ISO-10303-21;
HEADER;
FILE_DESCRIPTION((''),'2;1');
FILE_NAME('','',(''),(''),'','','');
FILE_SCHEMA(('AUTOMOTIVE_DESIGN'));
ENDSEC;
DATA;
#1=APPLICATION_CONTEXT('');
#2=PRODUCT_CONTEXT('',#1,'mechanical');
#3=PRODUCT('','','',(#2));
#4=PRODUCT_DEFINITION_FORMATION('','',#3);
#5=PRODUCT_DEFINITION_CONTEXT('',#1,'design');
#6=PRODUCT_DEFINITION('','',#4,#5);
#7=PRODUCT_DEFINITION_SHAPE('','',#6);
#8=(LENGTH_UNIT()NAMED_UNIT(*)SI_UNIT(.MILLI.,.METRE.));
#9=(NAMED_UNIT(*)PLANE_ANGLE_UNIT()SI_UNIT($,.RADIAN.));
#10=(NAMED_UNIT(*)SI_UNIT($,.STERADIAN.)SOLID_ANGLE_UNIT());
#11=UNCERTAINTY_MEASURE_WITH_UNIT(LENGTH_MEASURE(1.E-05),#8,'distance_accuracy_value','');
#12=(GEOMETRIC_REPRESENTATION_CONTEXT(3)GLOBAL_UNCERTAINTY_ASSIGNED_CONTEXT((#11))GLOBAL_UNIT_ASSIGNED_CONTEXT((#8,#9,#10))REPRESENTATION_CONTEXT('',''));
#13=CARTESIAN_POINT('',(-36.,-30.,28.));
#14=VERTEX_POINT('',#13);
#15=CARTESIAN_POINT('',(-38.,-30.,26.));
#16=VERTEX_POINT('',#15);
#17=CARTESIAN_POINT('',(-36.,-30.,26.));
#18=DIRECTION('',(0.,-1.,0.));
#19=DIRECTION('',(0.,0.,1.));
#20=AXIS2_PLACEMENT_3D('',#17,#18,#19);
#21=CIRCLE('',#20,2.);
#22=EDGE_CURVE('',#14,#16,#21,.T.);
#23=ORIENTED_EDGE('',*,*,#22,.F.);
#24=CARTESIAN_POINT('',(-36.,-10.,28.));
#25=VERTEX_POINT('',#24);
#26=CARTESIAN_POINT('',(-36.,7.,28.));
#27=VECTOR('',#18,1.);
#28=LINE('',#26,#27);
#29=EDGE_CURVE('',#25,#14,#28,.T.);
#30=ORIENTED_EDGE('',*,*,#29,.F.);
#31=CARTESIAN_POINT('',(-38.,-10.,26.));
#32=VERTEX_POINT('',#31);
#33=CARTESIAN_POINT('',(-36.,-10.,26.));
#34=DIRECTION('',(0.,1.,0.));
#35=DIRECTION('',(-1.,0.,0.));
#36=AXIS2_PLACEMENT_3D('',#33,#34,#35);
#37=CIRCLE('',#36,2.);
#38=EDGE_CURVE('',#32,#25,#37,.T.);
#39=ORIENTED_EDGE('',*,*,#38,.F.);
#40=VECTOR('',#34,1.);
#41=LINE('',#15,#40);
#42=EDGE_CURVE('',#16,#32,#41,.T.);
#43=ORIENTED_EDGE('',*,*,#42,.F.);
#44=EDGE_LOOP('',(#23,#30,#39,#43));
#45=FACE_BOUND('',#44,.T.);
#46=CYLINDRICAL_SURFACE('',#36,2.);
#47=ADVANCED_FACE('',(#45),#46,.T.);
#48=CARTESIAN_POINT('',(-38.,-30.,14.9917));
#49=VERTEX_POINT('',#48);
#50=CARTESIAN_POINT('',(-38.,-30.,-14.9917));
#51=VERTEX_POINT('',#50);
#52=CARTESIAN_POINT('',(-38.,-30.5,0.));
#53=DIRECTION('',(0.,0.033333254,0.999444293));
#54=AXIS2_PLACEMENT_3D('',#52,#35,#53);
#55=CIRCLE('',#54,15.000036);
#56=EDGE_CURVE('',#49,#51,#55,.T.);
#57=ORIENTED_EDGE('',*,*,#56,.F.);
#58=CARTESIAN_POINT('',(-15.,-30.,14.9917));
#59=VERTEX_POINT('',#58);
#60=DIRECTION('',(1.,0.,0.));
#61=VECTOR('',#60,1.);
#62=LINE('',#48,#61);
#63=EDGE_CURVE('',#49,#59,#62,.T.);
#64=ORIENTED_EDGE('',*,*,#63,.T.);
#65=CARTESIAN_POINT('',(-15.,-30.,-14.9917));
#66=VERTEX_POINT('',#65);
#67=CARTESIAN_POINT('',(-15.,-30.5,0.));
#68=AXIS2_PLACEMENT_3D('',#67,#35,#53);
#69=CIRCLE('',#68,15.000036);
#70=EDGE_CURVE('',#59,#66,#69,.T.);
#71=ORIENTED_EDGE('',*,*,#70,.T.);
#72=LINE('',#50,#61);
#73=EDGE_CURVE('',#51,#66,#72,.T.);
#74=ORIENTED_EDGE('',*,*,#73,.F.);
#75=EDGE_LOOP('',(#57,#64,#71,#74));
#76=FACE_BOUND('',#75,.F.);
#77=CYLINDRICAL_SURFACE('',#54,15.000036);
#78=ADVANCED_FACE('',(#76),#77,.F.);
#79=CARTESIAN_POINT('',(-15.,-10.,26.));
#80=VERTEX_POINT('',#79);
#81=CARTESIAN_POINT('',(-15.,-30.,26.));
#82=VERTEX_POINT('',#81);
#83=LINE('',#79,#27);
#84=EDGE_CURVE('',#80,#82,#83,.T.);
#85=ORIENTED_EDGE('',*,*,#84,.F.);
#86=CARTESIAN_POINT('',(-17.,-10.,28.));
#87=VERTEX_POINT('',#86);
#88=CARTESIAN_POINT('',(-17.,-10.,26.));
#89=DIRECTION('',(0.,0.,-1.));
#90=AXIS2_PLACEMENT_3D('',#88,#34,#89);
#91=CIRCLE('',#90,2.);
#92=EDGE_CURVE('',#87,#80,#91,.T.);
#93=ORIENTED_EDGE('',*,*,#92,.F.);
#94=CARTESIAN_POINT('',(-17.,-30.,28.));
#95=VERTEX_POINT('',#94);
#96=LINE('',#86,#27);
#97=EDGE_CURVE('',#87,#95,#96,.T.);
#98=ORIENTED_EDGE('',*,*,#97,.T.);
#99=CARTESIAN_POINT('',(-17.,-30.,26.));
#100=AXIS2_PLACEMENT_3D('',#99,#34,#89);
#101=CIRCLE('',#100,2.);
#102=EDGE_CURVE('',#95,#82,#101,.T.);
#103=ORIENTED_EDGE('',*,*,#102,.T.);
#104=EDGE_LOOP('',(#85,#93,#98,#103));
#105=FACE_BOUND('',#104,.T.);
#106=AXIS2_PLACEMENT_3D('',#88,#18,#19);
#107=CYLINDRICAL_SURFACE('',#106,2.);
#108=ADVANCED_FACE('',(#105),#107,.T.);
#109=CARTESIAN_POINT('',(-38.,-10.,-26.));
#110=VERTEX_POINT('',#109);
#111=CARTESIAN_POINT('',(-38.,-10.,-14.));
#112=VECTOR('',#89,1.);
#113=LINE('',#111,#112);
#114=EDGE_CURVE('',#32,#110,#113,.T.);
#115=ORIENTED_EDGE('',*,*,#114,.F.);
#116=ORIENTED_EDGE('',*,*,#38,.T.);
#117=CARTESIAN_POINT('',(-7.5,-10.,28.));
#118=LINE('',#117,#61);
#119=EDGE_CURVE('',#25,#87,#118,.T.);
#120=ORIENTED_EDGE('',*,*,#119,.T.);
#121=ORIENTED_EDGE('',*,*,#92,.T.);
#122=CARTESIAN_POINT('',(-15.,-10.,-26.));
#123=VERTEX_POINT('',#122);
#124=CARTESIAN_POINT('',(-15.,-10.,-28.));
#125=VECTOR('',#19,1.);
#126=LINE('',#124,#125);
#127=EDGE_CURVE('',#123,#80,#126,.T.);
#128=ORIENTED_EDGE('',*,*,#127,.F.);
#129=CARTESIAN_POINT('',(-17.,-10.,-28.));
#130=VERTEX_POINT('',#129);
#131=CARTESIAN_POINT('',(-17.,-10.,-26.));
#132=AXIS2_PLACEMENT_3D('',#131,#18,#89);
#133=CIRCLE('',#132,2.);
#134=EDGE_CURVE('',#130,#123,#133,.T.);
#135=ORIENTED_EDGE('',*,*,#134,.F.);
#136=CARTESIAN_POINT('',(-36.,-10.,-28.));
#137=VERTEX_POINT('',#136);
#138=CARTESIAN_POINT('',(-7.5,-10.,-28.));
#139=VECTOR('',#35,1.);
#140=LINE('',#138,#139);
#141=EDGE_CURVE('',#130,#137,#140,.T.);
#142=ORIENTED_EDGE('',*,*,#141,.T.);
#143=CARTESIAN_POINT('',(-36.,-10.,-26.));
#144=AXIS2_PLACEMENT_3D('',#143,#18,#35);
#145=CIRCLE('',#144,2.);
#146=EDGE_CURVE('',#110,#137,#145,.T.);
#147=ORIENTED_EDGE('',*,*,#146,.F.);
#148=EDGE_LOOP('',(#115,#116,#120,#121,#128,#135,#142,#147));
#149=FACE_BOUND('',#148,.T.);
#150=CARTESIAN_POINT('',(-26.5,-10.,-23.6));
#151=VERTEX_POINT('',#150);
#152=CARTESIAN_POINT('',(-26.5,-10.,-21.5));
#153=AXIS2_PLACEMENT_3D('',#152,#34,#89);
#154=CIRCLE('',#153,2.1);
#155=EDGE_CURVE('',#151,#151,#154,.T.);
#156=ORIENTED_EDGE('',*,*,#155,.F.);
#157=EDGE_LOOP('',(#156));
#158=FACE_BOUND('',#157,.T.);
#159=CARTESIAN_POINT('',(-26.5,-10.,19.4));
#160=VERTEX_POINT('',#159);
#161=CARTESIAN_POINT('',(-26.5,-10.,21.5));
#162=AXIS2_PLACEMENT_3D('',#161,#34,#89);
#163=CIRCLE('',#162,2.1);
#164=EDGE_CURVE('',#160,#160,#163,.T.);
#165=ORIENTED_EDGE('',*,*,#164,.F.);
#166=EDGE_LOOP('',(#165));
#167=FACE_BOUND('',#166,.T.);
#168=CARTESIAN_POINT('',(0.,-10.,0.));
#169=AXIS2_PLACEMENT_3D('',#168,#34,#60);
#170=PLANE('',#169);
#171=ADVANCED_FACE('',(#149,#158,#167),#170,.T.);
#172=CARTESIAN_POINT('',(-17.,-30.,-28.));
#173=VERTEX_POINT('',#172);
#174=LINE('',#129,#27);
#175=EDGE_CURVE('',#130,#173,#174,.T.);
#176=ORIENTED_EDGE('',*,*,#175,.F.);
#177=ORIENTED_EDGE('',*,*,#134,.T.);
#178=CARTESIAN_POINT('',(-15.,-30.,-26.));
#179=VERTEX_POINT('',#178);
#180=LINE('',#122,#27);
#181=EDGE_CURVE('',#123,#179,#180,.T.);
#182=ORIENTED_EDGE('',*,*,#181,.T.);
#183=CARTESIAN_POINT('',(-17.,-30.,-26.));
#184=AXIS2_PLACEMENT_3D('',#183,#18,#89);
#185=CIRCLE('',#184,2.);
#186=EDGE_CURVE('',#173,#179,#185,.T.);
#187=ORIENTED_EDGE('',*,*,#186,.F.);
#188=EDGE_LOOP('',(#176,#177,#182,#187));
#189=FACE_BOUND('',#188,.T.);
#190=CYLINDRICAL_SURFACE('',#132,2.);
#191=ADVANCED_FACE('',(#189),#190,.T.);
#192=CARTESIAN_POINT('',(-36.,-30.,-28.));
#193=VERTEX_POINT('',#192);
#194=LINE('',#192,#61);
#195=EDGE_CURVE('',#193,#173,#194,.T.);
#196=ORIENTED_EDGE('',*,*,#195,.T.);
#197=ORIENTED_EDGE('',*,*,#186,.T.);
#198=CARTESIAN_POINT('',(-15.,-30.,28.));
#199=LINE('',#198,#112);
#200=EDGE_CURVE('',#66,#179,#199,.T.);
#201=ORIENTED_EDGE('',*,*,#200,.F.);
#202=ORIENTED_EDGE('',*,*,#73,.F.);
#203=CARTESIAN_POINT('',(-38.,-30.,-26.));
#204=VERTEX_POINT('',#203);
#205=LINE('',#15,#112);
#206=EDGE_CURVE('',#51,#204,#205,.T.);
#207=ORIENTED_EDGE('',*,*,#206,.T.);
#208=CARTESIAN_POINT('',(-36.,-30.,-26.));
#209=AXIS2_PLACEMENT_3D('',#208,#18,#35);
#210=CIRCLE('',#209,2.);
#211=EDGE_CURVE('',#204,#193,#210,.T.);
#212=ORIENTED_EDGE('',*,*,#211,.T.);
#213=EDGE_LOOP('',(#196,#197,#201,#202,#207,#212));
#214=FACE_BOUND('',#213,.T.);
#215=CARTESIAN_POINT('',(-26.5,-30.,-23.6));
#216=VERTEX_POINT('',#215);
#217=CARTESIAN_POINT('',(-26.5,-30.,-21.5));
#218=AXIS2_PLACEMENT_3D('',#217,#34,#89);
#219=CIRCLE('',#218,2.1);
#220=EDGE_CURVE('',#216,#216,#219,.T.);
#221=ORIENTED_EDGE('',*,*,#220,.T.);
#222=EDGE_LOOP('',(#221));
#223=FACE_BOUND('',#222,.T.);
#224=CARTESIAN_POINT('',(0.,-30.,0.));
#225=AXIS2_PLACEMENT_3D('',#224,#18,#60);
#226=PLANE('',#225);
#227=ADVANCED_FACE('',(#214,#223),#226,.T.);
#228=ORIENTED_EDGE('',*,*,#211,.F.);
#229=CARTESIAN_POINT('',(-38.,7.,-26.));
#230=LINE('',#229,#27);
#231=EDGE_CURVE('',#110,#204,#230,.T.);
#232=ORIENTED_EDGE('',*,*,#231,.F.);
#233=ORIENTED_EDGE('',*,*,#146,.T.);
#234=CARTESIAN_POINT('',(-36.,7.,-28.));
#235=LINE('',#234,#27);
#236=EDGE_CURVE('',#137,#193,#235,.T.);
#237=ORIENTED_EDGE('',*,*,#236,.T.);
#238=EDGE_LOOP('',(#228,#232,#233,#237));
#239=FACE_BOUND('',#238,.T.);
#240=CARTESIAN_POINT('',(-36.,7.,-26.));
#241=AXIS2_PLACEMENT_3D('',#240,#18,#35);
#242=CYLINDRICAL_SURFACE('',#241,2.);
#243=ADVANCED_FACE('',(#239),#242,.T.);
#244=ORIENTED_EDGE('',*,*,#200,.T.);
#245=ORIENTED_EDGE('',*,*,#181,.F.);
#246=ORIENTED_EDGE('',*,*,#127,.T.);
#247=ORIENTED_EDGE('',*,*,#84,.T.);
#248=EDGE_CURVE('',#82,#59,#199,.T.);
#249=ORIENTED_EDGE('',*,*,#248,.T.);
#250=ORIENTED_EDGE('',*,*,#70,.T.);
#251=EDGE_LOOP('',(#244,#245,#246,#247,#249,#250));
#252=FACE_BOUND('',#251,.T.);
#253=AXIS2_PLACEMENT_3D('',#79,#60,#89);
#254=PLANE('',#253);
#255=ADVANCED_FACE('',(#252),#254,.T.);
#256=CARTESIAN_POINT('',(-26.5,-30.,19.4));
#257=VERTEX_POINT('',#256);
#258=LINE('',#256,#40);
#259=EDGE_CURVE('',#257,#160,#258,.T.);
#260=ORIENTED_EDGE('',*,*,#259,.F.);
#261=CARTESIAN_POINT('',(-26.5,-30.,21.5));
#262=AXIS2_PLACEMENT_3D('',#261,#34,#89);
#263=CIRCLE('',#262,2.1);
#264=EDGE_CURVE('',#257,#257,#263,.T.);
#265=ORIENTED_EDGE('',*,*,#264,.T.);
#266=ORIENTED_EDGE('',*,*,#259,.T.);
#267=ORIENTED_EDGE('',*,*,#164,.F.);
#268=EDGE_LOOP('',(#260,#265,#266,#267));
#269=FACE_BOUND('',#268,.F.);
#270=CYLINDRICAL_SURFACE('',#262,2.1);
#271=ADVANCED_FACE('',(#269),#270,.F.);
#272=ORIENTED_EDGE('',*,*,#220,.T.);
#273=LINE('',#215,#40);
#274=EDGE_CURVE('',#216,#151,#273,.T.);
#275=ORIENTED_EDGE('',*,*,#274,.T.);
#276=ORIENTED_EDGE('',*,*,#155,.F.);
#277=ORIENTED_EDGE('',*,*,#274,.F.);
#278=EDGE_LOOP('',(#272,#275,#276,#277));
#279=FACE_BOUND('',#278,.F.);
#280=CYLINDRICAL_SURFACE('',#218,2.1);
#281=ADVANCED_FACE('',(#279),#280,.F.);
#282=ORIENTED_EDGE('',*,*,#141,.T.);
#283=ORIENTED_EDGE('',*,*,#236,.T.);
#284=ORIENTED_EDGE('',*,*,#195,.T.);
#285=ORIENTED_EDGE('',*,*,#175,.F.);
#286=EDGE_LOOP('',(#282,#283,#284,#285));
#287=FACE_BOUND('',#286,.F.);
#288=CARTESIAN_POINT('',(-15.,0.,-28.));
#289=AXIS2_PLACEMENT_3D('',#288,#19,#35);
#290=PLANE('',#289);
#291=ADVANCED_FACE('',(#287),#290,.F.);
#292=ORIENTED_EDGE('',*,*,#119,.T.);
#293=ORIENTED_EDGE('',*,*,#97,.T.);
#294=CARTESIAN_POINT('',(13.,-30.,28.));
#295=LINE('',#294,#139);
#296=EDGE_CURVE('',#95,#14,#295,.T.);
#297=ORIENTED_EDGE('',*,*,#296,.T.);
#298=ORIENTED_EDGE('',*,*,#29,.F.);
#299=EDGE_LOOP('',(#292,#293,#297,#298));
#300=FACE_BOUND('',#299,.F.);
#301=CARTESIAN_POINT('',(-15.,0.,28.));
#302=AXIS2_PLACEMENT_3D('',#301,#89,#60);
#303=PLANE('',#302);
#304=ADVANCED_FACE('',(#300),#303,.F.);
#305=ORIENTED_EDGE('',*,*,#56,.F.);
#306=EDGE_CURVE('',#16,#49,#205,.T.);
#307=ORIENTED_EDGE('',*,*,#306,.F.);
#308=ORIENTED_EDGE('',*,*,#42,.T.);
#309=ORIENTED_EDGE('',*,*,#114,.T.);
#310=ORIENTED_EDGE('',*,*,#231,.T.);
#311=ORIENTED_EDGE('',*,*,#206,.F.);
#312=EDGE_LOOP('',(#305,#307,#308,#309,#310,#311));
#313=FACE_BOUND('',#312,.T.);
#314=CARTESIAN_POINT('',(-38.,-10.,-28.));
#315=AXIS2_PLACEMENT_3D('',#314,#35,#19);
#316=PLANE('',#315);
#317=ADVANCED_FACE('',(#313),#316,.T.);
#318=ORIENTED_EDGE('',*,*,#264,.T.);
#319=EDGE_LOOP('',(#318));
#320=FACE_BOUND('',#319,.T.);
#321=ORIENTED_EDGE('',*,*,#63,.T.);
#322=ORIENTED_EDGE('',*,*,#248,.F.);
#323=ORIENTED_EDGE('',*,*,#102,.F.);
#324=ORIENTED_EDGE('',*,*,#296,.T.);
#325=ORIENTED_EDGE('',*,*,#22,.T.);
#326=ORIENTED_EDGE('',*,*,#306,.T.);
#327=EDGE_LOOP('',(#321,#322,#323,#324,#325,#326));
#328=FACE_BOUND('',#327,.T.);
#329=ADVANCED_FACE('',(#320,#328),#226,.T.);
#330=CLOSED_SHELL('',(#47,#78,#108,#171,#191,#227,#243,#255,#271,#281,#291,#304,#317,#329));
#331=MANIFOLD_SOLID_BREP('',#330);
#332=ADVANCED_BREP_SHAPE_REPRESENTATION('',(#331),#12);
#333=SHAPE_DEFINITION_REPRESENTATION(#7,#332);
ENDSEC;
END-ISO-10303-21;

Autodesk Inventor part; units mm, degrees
ref_plane "YZ Plane" through (0, 0, 0) normal (1, 0, 0) x (0, 1, 0)
ref_plane "XZ Plane" through (0, 0, 0) normal (0, 1, 0) x (-1, 0, 0)
ref_plane "XY Plane" through (0, 0, 0) normal (0, 0, 1) x (1, 0, 0)
sketch "Sketch1" plane through (0, 0, 0) normal (0, 1, 0) x (-1, 0, 0)
  line L0 (12.5, 25.5) -> (-12.5, 25.5)
  line L1 (-12.5, 25.5) -> (-12.5, -25.5)
  line L2 (-12.5, -25.5) -> (12.5, -25.5)
  line L3 (12.5, -25.5) -> (12.5, 25.5)
  line L4 (13, 26) -> (-13, 26)
  line L5 (-13, 26) -> (-13, -26)
  line L6 (-13, -26) -> (13, -26)
  line L7 (13, -26) -> (13, 26)
  line L8 (15, 28) -> (-15, 28)
  line L9 (-15, 28) -> (-15, -28)
  line L10 (-15, -28) -> (15, -28)
  circle A0 centre (8.5, 21.5) radius 2
  circle A1 centre (8.5, -21.5) radius 2
  circle A2 centre (-8.5, 21.5) radius 2
  circle A3 centre (-8.5, -21.5) radius 2
  line L11 (15, -28) -> (38, -28)
  line L12 (38, -28) -> (38, -26)
  line L13 (38, -26) -> (13, -26)
  line L14 (13, 26) -> (38, 26)
  line L15 (38, 26) -> (38, 28)
  line L16 (38, 28) -> (15, 28)
  line L17 (38, -26) -> (38, 26)
  line L18 (12.5, -15.5) -> (-12.5, -15.5)
  line L19 (12.5, 15.5) -> (-12.5, 15.5)
  line L20 (12.5, -15.5) -> (13, -15.5)
  line L21 (12.5, 15.5) -> (13, 15.5)
  line L22 (-12.5, -15.5) -> (-13, -15.5)
  line L23 (-12.5, 15.5) -> (-13, 15.5)
  point P0 (0, 0)
  dimension "d0" = 51
  dimension "d1" = 25
  dimension "d2" = 12.5
  dimension "d3" = 25.5
  dimension "d4" = 4
  dimension "d5" = 4
  dimension "d6" = 4
  dimension "d7" = 4
  dimension "d8" = 0.5
  dimension "d10" = 4
  dimension "d11" = 4
  dimension "d12" = 4
  dimension "d13" = 4
  dimension "d50" = 25
  dimension "d51" = 10
  dimension "d52" = 10
extrude "Extrusion1" add sketch "Sketch1" against normal blind 10 contours L3 L19 L1 L0 | L0 L1 L23 L5 L4 L7 L21 L3 | L21 L7 L20 L3 | L3 L18 L1 L19 | L1 L22 L5 L23 | L20 L7 L6 L5 L22 L1 L2 L3 | L3 L2 L1 L18 | L7 L14 L17 L13 | L5 L6 L13 L12 L11 L10 L9 L8 L16 L15 L14 L4 | A0 | A1 | A2 | A3
extrude "Extrusion2" add sketch "Sketch1" along normal blind 7 contours L5 L6 L13 L12 L11 L10 L9 L8 L16 L15 L14 L4
extrude "Extrusion3" cut sketch "Sketch1" against normal blind 6 contours A0 | A1 | A2 | A3
extrude "Extrusion8" cut sketch "Sketch1" against normal blind 7 contours L21 L7 L20 L3 | L3 L18 L1 L19 | L1 L22 L5 L23 | L7 L14 L17 L13
fillet "Fillet3" radius 2 6 edges at (-13, -3.5, -15.5) (-13, -3.5, -26) (13, -3.5, -15.5) (13, -3.5, 15.5) (-13, -3.5, 15.5) (-13, -3.5, 26)
sketch "Sketch7" plane through (8.5, -6, -21.5) normal (0, 1, 0) x (1, 0, 0)
  circle A0 centre (0, 0) radius 2 projected
  circle A1 centre (-17, 0) radius 2 projected
  circle A2 centre (-17, -43) radius 2 projected
  circle A3 centre (0, -43) radius 2 projected
  point P0 (-8.5, -21.5)
extrude "Extrusion9" cut sketch "Sketch7" against normal blind 1
sketch "Sketch8" plane through (-38, -10, -28) normal (-1, 0, 0) x (0, 0, 1)
  line L0 (54, 17) -> (54, 3) projected
  line L1 (54, 3) -> (2, 3) projected
  line L2 (2, 3) -> (2, 17) projected
  line L3 (0, 17) -> (2, 17) projected
  line L4 (0, 17) -> (0, 0) projected
  line L5 (56, 0) -> (0, 0) projected
  line L6 (56, 0) -> (56, 17) projected
  line L7 (54, 17) -> (56, 17) projected
  line L8 (2, 17) -> (54, 17)
  line L9 (13.7, 17) -> (13.7, 9)
  line L10 (13.7, 9) -> (19.7, 9)
  line L11 (19.7, 9) -> (19.7, 17)
  line L12 (36.7, 17) -> (36.7, 9)
  line L13 (36.7, 9) -> (42.7, 9)
  line L14 (42.7, 9) -> (42.7, 17)
  point P0 (28, 10)
  dimension "d58" = 6
  dimension "d59" = 6
  dimension "d60" = 17
  dimension "d63" = 11.7
  dimension "d66" = 8
extrude "Extrusion10" add sketch "Sketch8" against normal blind 2 contours L0 L1 L2 L8 L9 L10 L11 L12 L13 L14
fillet "Fillet4" radius 2 8 edges at (-37, -1, -14.3) (-37, -1, -8.3) (-37, -1, 8.7) (-37, -1, 14.7) (-38, -1.5, 28) (15, -1.5, 28) (15, -1.5, -28) (-38, -1.5, -28)
fillet "Fillet5" radius 2 2 edges at (-36, 0, -26) (-36, 0, 26)
sketch "Sketch10" plane through (0, -10, 0) normal (0, -1, 0) x (1, 0, 0)
  line L0 (-15, 26) -> (-34, 26) projected
  arc A0 (-34, 26) -> (-36, 24) centre (-34, 24) ccw projected
  line L1 (-36, -24) -> (-36, 24) projected
  arc A1 (-36, -24) -> (-34, -26) centre (-34, -24) ccw projected
  line L2 (-34, -26) -> (-15, -26) projected
  arc A2 (-38, -26) -> (-36, -28) centre (-36, -26) ccw projected
  line L3 (-36, -28) -> (13, -28) projected
  arc A3 (13, -28) -> (15, -26) centre (13, -26) ccw projected
  line L4 (15, -26) -> (15, 26) projected
  arc A4 (15, 26) -> (13, 28) centre (13, 26) ccw projected
  line L5 (13, 28) -> (-36, 28) projected
  arc A5 (-36, 28) -> (-38, 26) centre (-36, 26) ccw projected
  line L6 (-38, 26) -> (-38, -26) projected
  line L7 (-36, 24) -> (-36, 28)
  line L8 (-36, -24) -> (-36, -28)
  line L9 (-15, 28) -> (-15, -28)
  point P0 (0, 0)
extrude "Extrusion11" add sketch "Sketch10" along normal blind 20 contours L9 L2 A1 L1 A0 L0 | L0 A0 L7 L5 L9 | L9 L3 L8 A1 L2 | L1 L8 A2 L6 A5 L7
sketch "Sketch11" plane through (-38, 7, -8.3) normal (-1, 0, 0) x (0, 0, 1)
  line L0 (-17.7, -37) -> (-17.7, 0) projected
  line L1 (34.3, -37) -> (-17.7, -37) projected
  line L2 (34.3, 0) -> (34.3, -37) projected
  line L3 (34.3, 0) -> (23, 0) projected
  line L4 (23, 0) -> (23, -6) projected
  arc A0 (21, -8) -> (23, -6) centre (21, -6) ccw projected
  line L5 (21, -8) -> (19, -8) projected
  arc A1 (17, -6) -> (19, -8) centre (19, -6) ccw projected
  line L6 (17, -6) -> (17, 0) projected
  line L7 (17, 0) -> (0, 0) projected
  line L8 (0, 0) -> (0, -6) projected
  arc A2 (-2, -8) -> (0, -6) centre (-2, -6) ccw projected
  line L9 (-2, -8) -> (-4, -8) projected
  arc A3 (-6, -6) -> (-4, -8) centre (-4, -6) ccw projected
  line L10 (-6, -6) -> (-6, 0) projected
  line L11 (-17.7, 0) -> (-6, 0) projected
  arc A4 (23.2917, -37) -> (-6.6917, -37) centre (8.3, -37.5) ccw
  point P0 (8.3, -7)
  dimension "d71" = 52
  dimension "d72" = 26
  dimension "d73" = 0.5
  dimension "d74" = 30
extrude "Extrusion12" cut sketch "Sketch11" against normal through all contours A4 L1
fillet "Fillet6" radius 2 2 edges at (-15, -20, 28) (-15, -20, -28)
sketch "Sketch12" plane through (0, -30, 0) normal (0, -1, 0) x (1, 0, 0)
  arc A0 (-15, 26) -> (-17, 28) centre (-17, 26) ccw projected
  line L0 (-17, 28) -> (-36, 28) projected
  arc A1 (-36, 28) -> (-38, 26) centre (-36, 26) ccw projected
  line L1 (-38, 26) -> (-38, 14.9917) projected
  line L2 (-38, 14.9917) -> (-15, 14.9917) projected
  line L3 (-15, 14.9917) -> (-15, 26) projected
  arc A2 (-17, -28) -> (-15, -26) centre (-17, -26) ccw projected
  line L4 (-15, -26) -> (-15, -14.9917) projected
  line L5 (-15, -14.9917) -> (-38, -14.9917) projected
  line L6 (-38, -14.9917) -> (-38, -26) projected
  arc A3 (-38, -26) -> (-36, -28) centre (-36, -26) ccw projected
  line L7 (-36, -28) -> (-17, -28) projected
  point P0 (0, 0)
  point P1 (-26.5, 21.5)
  point P2 (-26.5, -21.5)
  dimension "d78" = 23
  dimension "d79" = 11.5
  dimension "d80" = 13.0083
  dimension "d81" = 6.5
  dimension "d82" = 6.5
hole "Hole1" at (-26.5, -30, 21.5) at (-26.5, -30, -21.5) direction (0, 1, 0) diameter 4.2 end through all
sketch "Sketch13" plane through (0, 7, 0) normal (0, 1, 0) x (1, 0, 0)
  line L0 (-47.6538, 31.9961) -> (20.3258, 31.9961)
  line L1 (20.3258, 31.9961) -> (20.3258, -36.2753)
  line L2 (20.3258, -36.2753) -> (-47.6538, -36.2753)
  line L3 (-47.6538, -36.2753) -> (-47.6538, 31.9961)
  point P0 (0, 0)
extrude "Extrusion13" cut sketch "Sketch13" against normal up to surface (17 mm away)
equation "\"d2\" = 0.5 * d1"
equation "\"d3\" = 0.5 * d0"
equation "\"d5\" = d4"
equation "\"d6\" = d5"
equation "\"d7\" = d4"
equation "\"d59\" = d58"
equation "\"d72\" = 0.5 * d71"
equation "\"d79\" = 0.5 * d78"
equation "\"d82\" = d81"
properties part number "3DP_ASA_Preamp_Case_Clamp"
